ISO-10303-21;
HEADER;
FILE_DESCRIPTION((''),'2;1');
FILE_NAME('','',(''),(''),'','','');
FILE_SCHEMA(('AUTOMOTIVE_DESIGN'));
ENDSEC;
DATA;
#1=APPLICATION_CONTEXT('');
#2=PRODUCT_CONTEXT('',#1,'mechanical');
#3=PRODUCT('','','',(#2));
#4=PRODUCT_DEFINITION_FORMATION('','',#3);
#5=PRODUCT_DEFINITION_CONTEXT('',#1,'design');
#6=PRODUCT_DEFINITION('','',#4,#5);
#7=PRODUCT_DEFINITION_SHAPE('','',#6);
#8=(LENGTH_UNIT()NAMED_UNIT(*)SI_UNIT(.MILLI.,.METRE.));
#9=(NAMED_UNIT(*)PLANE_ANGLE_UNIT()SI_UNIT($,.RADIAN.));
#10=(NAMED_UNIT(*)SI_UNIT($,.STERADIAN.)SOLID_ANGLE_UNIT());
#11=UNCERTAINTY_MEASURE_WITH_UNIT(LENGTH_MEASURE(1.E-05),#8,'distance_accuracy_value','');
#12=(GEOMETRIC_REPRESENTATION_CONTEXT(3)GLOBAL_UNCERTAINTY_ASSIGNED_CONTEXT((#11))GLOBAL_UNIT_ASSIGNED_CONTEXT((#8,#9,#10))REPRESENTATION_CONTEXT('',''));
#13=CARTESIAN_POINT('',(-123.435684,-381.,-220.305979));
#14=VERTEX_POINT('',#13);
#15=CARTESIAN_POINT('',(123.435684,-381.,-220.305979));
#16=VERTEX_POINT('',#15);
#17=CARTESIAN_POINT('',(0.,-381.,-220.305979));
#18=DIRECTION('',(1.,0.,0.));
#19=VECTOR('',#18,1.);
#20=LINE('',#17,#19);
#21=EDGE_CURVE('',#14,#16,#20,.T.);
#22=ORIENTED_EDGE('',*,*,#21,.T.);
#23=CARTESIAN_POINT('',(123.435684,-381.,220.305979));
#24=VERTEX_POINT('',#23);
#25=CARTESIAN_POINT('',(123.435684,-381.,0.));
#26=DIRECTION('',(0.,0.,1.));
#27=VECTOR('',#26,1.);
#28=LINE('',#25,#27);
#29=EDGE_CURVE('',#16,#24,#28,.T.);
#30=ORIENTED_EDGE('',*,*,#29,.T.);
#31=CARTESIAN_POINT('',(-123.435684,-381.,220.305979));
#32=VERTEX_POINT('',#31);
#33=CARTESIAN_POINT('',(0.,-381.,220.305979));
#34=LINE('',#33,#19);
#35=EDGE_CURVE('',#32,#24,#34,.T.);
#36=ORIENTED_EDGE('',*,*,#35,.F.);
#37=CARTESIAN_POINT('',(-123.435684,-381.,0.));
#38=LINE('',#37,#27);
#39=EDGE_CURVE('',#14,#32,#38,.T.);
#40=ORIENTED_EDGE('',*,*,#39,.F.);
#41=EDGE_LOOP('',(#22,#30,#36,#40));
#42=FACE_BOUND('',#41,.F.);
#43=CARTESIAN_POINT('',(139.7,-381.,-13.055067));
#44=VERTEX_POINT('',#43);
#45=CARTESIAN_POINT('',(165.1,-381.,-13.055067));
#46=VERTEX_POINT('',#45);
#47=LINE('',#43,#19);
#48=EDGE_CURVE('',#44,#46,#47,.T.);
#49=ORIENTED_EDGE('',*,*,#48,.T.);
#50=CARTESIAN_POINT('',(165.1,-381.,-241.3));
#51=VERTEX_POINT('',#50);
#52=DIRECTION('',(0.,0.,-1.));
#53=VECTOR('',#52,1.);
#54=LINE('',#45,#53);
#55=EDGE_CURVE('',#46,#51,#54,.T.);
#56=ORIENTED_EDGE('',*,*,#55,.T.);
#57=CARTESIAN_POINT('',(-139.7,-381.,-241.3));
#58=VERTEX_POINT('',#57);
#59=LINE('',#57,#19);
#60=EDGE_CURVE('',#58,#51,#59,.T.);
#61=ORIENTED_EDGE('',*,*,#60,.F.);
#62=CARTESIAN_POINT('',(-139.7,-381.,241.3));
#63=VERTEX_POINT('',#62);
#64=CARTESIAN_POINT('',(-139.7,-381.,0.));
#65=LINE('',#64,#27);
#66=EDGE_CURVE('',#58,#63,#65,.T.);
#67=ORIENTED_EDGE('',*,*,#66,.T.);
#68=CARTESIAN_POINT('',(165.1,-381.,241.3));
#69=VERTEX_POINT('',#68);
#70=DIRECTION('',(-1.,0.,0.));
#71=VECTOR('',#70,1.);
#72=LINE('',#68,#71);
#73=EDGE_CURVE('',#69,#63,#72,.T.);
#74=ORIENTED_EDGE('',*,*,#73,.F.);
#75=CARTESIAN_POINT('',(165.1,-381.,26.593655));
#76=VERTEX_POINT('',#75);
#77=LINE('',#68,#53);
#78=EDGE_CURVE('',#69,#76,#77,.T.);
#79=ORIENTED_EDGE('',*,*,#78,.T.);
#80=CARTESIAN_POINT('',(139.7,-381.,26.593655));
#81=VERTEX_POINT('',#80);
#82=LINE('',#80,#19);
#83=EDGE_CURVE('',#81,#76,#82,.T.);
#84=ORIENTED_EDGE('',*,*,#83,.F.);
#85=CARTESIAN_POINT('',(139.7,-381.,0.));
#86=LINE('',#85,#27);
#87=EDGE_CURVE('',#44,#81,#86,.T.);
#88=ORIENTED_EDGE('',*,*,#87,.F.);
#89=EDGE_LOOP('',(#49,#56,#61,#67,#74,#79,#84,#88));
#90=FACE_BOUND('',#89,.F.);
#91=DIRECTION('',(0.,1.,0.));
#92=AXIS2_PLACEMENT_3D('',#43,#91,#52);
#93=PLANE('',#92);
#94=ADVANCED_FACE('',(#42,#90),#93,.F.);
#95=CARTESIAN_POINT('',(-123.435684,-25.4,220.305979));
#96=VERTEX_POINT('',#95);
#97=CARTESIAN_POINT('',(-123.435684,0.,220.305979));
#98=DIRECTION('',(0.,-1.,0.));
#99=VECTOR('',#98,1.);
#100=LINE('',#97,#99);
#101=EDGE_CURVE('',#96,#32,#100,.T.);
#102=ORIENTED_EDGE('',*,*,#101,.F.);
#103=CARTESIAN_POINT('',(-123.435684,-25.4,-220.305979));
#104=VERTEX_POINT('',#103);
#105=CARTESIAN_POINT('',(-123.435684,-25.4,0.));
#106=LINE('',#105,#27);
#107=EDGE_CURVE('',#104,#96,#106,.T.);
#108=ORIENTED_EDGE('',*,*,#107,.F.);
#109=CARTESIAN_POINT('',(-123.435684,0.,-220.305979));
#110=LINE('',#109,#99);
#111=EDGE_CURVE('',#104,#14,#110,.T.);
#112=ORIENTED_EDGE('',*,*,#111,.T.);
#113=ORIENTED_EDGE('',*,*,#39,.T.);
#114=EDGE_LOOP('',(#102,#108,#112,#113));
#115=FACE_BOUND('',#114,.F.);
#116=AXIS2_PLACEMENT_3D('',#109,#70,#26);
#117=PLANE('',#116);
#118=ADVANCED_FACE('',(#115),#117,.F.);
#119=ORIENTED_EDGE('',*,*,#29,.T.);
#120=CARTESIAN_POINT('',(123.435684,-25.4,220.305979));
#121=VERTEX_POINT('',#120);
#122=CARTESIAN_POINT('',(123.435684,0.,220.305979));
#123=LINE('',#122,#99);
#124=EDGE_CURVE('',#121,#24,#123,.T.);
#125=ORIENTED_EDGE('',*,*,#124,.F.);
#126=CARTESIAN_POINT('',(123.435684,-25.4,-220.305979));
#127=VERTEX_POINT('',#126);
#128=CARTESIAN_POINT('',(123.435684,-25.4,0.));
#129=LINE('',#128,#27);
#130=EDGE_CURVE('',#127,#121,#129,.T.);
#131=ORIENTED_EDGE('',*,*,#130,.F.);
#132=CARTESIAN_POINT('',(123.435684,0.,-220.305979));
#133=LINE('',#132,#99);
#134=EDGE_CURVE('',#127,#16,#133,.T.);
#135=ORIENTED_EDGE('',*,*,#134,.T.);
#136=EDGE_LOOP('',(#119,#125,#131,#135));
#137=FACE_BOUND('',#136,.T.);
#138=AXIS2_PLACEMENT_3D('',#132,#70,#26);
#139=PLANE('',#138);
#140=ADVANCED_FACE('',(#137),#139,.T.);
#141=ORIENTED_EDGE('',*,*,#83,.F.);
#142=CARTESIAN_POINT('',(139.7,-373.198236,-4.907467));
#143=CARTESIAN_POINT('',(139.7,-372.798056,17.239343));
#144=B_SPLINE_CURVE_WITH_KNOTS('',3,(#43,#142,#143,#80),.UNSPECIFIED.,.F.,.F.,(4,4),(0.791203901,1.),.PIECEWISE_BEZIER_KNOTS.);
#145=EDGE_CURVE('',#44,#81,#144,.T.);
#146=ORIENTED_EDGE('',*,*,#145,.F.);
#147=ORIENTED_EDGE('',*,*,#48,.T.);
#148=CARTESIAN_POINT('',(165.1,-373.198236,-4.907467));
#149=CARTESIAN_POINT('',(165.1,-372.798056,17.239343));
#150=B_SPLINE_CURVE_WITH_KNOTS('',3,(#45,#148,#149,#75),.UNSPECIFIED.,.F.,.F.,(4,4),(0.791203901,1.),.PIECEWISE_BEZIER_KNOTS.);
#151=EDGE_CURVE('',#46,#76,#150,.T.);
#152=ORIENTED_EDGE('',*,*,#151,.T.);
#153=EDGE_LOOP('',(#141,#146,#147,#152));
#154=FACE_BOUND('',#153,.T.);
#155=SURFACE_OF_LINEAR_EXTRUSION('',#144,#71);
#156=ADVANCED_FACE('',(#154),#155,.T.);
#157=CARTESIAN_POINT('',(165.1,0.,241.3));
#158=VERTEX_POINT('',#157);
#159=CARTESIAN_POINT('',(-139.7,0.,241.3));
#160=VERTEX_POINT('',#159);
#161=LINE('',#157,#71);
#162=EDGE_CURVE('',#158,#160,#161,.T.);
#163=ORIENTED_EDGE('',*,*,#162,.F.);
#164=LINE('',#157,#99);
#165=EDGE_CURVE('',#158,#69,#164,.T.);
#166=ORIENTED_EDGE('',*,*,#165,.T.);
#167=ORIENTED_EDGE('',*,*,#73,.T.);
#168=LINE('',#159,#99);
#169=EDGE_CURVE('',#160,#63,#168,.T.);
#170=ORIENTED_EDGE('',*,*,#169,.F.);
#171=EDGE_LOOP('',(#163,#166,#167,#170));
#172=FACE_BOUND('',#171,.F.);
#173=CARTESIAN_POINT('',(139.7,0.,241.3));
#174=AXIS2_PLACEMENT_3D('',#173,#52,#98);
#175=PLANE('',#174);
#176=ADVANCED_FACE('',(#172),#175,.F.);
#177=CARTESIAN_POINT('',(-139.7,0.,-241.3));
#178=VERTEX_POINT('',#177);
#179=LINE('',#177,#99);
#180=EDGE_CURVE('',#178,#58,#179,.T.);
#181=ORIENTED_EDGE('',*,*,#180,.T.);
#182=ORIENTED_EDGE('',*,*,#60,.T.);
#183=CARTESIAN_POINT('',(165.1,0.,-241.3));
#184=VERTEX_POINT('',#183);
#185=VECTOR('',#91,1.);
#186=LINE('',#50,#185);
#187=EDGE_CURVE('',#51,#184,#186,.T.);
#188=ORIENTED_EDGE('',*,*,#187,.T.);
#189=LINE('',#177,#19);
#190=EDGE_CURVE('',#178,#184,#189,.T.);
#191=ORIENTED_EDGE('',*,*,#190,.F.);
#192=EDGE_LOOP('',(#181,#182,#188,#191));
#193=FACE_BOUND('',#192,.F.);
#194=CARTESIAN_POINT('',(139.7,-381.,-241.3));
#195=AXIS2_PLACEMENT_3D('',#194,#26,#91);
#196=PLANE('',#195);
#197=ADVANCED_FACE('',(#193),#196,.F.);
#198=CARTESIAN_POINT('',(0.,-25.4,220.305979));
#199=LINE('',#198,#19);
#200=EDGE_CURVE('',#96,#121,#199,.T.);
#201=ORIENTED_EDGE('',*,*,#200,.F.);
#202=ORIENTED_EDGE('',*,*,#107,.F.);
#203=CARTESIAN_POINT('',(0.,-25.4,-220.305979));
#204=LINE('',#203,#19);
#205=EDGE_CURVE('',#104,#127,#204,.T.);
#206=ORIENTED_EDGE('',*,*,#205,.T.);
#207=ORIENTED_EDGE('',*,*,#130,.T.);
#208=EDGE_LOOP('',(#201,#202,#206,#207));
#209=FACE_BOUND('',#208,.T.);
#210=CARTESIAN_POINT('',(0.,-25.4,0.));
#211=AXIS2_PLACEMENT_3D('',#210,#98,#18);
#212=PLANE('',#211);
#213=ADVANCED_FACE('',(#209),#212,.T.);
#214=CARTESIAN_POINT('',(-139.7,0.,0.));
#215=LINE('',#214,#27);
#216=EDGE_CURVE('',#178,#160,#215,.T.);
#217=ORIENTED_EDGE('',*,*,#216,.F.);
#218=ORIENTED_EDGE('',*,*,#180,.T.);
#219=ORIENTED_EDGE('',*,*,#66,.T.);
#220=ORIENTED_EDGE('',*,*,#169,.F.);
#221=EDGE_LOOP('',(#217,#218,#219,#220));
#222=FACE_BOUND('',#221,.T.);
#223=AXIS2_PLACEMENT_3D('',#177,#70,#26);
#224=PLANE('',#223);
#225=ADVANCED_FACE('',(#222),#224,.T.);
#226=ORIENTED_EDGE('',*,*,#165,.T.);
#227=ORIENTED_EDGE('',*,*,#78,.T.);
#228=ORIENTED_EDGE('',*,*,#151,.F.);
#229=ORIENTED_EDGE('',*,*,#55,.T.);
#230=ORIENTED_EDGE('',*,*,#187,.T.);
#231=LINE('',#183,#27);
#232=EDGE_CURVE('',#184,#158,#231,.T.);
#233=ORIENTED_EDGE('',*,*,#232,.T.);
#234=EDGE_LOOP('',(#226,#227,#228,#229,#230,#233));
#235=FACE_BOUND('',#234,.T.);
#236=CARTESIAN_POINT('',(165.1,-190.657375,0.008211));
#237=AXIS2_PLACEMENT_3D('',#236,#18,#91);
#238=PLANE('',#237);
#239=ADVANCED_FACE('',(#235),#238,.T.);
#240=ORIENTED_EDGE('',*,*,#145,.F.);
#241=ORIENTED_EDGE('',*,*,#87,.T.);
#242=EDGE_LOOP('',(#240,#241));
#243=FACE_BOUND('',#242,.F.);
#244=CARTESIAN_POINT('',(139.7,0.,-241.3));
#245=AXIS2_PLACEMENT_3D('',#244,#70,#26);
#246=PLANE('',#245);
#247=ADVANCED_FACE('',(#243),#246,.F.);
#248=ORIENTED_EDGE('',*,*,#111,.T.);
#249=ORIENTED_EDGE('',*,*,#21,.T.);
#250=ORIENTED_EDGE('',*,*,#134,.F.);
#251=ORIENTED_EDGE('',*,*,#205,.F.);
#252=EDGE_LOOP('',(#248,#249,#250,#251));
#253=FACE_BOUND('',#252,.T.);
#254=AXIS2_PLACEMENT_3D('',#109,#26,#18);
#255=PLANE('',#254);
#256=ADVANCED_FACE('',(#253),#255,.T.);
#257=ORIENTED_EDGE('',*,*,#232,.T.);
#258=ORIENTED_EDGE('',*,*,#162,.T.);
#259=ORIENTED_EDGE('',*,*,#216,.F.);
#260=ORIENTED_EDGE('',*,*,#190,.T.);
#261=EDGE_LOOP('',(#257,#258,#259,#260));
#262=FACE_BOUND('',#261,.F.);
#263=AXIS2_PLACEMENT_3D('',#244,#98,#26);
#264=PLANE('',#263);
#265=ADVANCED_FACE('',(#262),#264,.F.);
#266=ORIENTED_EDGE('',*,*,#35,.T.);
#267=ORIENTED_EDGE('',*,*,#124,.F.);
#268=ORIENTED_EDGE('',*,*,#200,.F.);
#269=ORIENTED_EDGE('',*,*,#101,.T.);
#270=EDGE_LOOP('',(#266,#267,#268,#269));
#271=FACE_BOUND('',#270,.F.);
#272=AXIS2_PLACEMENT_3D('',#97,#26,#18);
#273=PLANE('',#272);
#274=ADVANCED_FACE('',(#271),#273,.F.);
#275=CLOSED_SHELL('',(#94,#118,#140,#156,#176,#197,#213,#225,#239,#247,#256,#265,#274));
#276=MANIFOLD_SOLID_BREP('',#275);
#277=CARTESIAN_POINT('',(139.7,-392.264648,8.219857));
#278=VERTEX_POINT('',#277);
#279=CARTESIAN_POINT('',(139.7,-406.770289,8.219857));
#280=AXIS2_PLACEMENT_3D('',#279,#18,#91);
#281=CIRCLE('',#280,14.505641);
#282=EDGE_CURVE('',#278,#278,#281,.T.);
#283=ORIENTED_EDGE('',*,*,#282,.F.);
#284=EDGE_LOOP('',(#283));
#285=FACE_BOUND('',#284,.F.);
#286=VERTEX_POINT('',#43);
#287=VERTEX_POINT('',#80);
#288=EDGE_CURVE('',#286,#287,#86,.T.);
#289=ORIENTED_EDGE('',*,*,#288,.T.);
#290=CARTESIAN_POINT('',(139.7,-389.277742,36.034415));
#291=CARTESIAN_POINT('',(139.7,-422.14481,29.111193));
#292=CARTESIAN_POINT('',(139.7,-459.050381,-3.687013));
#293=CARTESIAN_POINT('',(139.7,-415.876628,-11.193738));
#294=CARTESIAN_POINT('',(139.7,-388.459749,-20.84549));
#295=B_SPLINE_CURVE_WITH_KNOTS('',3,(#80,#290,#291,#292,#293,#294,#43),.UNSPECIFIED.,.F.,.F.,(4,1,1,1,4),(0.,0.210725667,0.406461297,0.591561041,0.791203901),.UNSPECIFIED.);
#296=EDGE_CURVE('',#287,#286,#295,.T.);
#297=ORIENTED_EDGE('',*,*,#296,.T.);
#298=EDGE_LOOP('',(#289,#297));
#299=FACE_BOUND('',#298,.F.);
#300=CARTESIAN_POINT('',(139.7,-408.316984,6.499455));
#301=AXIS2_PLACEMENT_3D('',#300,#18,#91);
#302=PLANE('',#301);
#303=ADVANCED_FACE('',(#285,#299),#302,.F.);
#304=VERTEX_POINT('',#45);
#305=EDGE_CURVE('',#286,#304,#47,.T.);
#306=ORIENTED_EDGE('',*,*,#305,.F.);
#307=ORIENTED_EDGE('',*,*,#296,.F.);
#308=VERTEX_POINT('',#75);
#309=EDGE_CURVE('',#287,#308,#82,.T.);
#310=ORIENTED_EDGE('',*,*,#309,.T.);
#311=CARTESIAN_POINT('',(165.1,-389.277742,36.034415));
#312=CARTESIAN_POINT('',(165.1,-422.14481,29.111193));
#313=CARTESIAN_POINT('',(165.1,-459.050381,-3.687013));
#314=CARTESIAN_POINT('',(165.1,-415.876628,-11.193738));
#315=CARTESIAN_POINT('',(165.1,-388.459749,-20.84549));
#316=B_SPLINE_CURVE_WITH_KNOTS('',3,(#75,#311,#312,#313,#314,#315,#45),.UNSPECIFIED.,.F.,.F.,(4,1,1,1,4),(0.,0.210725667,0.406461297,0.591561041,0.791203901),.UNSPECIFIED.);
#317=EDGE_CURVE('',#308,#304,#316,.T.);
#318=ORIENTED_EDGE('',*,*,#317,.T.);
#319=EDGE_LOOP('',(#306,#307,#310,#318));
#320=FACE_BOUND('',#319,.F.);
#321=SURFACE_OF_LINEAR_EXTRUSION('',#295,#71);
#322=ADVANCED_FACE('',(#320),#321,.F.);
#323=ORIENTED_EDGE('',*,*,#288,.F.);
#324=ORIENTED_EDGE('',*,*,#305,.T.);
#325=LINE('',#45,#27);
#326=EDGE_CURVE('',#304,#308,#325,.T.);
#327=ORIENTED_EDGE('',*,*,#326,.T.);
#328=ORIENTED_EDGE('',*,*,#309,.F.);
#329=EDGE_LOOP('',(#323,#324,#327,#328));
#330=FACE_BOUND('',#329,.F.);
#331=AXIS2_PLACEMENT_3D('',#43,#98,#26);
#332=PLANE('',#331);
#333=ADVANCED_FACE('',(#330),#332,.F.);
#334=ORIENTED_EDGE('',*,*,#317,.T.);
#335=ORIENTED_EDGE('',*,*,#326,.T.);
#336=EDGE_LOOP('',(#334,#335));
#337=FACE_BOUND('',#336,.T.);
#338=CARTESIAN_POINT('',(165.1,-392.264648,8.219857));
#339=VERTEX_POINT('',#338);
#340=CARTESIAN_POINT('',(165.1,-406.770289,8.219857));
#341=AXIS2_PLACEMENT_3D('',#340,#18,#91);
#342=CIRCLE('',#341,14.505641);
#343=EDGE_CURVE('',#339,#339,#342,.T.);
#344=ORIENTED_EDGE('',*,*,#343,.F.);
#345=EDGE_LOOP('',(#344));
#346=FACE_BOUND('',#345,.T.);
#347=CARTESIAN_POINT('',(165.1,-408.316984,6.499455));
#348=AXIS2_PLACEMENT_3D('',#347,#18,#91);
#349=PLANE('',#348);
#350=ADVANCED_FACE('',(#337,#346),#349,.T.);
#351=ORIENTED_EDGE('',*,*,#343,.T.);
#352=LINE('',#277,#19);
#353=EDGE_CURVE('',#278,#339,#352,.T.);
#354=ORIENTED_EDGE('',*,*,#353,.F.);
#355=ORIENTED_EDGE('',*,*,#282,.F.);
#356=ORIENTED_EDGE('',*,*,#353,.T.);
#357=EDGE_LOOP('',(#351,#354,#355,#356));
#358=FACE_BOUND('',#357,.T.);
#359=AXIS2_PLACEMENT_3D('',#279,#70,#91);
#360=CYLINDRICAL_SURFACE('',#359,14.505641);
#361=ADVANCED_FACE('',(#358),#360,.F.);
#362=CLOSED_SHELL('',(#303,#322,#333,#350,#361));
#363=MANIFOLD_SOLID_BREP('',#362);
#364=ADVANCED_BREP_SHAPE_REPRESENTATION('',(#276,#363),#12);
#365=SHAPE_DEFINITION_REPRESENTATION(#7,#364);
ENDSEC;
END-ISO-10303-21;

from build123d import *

# Parameters (mm, degrees)
F0_W     = 279.4
F0_H     = 482.6
F0_W_2   = 246.8713670969
F0_H_2   = 440.6119585037
F1_DEPTH = 381
F2_DEPTH = 25.4
F3_R     = 14.505640819
F4_DEPTH = 25.4


with BuildPart() as f1:
    # F0 (on Front) → F1 (new body)
    with BuildSketch(Plane.XZ):
        Rectangle(F0_W, F0_H)
        Rectangle(F0_W_2, F0_H_2, mode=Mode.SUBTRACT)
    extrude(amount=F1_DEPTH)

    # F0 (on Front) → F2 (join)
    with BuildSketch(Plane.XZ):
        Rectangle(F0_W_2, F0_H_2)
    extrude(amount=F2_DEPTH)

    # F3 (on face) → F4 (join)
    with BuildSketch(Plane.YZ.offset(139.7)):
        with BuildLine():
            Line((-381, -13.0550665781), (-381, 26.5936553478))
            add(Edge.make_bspline(
                [(-381, 26.5936553478), (-389.2777418759, 36.0344145926), (-422.144810442, 29.1111932624), (-459.0503806055, -3.6870125897), (-415.8766281026, -11.1937380865), (-388.4597489706, -20.8454898508), (-381, -13.0550665781)],
                knots=[0, 0, 0, 0, 0.2107256672, 0.4064612968, 0.5915610408, 0.7912039011, 0.7912039011, 0.7912039011, 0.7912039011], degree=3))
        make_face()
        with Locations((-406.7702889442, 8.2198567688)):
            Circle(F3_R, mode=Mode.SUBTRACT)
        with BuildLine():
            Line((-381, 241.3), (-381, 26.5936553478))
            add(Edge.make_bspline(
                [(-381, -13.0550665781), (-373.1982359839, -4.9074674835), (-372.7980555741, 17.2393430457), (-381, 26.5936553478)],
                knots=[0.7912039011, 0.7912039011, 0.7912039011, 0.7912039011, 1, 1, 1, 1], degree=3))
            Line((-381, -13.0550665781), (-381, -241.3))
            Line((-381, -241.3), (0, -241.3))
            Line((0, -241.3), (0, 241.3))
            Line((0, 241.3), (-381, 241.3))
        make_face()
    extrude(amount=F4_DEPTH)


solid = f1.part
